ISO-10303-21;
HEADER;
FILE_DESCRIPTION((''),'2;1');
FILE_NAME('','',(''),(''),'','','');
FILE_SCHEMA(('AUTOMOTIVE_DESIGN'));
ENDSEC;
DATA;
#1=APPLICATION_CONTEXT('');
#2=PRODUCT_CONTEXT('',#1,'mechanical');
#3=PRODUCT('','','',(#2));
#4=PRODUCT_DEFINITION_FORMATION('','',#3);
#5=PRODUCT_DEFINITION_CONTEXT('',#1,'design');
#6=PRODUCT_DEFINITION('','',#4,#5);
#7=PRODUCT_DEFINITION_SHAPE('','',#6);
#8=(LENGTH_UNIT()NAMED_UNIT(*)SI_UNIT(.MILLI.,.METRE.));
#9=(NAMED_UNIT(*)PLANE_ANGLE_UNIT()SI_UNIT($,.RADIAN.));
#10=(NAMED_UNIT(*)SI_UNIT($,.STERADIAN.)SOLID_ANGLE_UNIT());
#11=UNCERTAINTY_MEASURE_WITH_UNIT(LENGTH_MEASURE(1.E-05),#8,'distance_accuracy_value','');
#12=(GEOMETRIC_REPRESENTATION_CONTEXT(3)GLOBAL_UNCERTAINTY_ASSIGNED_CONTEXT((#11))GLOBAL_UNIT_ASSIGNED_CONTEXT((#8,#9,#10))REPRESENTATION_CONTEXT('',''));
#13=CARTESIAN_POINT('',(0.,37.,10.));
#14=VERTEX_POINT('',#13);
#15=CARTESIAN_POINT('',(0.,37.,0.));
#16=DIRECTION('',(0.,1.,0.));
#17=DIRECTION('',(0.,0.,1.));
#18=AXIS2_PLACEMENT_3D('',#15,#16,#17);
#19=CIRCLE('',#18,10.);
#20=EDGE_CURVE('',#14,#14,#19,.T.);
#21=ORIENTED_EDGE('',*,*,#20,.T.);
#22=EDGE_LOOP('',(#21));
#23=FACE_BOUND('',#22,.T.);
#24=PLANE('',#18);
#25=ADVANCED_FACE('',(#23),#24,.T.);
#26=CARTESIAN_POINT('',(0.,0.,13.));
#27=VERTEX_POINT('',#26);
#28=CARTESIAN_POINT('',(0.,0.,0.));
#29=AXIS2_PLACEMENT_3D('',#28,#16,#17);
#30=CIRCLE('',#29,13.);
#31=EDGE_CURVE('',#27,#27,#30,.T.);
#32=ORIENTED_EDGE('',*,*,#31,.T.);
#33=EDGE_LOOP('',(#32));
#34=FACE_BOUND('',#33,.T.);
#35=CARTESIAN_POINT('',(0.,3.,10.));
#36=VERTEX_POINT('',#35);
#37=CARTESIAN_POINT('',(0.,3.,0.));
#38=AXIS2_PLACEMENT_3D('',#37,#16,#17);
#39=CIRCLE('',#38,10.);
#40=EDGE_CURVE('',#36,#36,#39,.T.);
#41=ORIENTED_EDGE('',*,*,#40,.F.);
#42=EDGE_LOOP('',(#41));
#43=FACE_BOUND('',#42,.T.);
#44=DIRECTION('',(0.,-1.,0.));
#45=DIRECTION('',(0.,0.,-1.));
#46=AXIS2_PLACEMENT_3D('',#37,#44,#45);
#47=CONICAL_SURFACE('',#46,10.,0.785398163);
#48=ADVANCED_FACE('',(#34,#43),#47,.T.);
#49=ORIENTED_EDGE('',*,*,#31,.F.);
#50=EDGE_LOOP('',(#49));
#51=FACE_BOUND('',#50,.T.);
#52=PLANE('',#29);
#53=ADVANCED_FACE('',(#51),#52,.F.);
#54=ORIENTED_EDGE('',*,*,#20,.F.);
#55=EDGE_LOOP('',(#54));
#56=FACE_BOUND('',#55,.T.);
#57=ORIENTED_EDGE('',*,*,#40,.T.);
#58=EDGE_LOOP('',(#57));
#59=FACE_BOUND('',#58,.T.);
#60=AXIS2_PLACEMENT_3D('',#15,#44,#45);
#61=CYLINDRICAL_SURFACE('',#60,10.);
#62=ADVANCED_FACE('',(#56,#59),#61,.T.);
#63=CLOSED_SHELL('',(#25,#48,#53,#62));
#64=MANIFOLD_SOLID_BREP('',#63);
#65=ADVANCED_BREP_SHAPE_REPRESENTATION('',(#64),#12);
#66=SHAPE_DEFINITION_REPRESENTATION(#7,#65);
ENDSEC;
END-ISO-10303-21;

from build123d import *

# Parameters (mm, degrees)
ESQUISSE1_R        = 13
BOSS_EXTRU_3_DEPTH = 3
CHANFREIN2_SIZE    = 3
ESQUISSE3_R        = 10
BOSS_EXTRU_4_DEPTH = 34


with BuildPart() as part:
    # Esquisse1 → Boss.-Extru.3 (new body)
    with BuildSketch(Plane(origin=(0, 0, 0), x_dir=(1, 0, 0), z_dir=(0, 1, 0))):
        with Locations(Location((0, 0, 0), (0, 0, 270))):
            Circle(ESQUISSE1_R)
    extrude(amount=BOSS_EXTRU_3_DEPTH)

    # Chanfrein2
    chanfrein2_edges = [part.edges().sort_by_distance(p)[0] for p in [
        (0, 3, -13),
    ]]
    chamfer(chanfrein2_edges, length=CHANFREIN2_SIZE - 0.0001)  # a hair under: the kernel refuses the full size

    # Esquisse3 → Boss.-Extru.4 (add)
    with BuildSketch(Plane(origin=(0, 3, 0), x_dir=(1, 0, 0), z_dir=(0, 1, 0))):
        with Locations(Location((0, 0, 0), (0, 0, 270))):
            Circle(ESQUISSE3_R)
    extrude(amount=BOSS_EXTRU_4_DEPTH)


solid = part.part
